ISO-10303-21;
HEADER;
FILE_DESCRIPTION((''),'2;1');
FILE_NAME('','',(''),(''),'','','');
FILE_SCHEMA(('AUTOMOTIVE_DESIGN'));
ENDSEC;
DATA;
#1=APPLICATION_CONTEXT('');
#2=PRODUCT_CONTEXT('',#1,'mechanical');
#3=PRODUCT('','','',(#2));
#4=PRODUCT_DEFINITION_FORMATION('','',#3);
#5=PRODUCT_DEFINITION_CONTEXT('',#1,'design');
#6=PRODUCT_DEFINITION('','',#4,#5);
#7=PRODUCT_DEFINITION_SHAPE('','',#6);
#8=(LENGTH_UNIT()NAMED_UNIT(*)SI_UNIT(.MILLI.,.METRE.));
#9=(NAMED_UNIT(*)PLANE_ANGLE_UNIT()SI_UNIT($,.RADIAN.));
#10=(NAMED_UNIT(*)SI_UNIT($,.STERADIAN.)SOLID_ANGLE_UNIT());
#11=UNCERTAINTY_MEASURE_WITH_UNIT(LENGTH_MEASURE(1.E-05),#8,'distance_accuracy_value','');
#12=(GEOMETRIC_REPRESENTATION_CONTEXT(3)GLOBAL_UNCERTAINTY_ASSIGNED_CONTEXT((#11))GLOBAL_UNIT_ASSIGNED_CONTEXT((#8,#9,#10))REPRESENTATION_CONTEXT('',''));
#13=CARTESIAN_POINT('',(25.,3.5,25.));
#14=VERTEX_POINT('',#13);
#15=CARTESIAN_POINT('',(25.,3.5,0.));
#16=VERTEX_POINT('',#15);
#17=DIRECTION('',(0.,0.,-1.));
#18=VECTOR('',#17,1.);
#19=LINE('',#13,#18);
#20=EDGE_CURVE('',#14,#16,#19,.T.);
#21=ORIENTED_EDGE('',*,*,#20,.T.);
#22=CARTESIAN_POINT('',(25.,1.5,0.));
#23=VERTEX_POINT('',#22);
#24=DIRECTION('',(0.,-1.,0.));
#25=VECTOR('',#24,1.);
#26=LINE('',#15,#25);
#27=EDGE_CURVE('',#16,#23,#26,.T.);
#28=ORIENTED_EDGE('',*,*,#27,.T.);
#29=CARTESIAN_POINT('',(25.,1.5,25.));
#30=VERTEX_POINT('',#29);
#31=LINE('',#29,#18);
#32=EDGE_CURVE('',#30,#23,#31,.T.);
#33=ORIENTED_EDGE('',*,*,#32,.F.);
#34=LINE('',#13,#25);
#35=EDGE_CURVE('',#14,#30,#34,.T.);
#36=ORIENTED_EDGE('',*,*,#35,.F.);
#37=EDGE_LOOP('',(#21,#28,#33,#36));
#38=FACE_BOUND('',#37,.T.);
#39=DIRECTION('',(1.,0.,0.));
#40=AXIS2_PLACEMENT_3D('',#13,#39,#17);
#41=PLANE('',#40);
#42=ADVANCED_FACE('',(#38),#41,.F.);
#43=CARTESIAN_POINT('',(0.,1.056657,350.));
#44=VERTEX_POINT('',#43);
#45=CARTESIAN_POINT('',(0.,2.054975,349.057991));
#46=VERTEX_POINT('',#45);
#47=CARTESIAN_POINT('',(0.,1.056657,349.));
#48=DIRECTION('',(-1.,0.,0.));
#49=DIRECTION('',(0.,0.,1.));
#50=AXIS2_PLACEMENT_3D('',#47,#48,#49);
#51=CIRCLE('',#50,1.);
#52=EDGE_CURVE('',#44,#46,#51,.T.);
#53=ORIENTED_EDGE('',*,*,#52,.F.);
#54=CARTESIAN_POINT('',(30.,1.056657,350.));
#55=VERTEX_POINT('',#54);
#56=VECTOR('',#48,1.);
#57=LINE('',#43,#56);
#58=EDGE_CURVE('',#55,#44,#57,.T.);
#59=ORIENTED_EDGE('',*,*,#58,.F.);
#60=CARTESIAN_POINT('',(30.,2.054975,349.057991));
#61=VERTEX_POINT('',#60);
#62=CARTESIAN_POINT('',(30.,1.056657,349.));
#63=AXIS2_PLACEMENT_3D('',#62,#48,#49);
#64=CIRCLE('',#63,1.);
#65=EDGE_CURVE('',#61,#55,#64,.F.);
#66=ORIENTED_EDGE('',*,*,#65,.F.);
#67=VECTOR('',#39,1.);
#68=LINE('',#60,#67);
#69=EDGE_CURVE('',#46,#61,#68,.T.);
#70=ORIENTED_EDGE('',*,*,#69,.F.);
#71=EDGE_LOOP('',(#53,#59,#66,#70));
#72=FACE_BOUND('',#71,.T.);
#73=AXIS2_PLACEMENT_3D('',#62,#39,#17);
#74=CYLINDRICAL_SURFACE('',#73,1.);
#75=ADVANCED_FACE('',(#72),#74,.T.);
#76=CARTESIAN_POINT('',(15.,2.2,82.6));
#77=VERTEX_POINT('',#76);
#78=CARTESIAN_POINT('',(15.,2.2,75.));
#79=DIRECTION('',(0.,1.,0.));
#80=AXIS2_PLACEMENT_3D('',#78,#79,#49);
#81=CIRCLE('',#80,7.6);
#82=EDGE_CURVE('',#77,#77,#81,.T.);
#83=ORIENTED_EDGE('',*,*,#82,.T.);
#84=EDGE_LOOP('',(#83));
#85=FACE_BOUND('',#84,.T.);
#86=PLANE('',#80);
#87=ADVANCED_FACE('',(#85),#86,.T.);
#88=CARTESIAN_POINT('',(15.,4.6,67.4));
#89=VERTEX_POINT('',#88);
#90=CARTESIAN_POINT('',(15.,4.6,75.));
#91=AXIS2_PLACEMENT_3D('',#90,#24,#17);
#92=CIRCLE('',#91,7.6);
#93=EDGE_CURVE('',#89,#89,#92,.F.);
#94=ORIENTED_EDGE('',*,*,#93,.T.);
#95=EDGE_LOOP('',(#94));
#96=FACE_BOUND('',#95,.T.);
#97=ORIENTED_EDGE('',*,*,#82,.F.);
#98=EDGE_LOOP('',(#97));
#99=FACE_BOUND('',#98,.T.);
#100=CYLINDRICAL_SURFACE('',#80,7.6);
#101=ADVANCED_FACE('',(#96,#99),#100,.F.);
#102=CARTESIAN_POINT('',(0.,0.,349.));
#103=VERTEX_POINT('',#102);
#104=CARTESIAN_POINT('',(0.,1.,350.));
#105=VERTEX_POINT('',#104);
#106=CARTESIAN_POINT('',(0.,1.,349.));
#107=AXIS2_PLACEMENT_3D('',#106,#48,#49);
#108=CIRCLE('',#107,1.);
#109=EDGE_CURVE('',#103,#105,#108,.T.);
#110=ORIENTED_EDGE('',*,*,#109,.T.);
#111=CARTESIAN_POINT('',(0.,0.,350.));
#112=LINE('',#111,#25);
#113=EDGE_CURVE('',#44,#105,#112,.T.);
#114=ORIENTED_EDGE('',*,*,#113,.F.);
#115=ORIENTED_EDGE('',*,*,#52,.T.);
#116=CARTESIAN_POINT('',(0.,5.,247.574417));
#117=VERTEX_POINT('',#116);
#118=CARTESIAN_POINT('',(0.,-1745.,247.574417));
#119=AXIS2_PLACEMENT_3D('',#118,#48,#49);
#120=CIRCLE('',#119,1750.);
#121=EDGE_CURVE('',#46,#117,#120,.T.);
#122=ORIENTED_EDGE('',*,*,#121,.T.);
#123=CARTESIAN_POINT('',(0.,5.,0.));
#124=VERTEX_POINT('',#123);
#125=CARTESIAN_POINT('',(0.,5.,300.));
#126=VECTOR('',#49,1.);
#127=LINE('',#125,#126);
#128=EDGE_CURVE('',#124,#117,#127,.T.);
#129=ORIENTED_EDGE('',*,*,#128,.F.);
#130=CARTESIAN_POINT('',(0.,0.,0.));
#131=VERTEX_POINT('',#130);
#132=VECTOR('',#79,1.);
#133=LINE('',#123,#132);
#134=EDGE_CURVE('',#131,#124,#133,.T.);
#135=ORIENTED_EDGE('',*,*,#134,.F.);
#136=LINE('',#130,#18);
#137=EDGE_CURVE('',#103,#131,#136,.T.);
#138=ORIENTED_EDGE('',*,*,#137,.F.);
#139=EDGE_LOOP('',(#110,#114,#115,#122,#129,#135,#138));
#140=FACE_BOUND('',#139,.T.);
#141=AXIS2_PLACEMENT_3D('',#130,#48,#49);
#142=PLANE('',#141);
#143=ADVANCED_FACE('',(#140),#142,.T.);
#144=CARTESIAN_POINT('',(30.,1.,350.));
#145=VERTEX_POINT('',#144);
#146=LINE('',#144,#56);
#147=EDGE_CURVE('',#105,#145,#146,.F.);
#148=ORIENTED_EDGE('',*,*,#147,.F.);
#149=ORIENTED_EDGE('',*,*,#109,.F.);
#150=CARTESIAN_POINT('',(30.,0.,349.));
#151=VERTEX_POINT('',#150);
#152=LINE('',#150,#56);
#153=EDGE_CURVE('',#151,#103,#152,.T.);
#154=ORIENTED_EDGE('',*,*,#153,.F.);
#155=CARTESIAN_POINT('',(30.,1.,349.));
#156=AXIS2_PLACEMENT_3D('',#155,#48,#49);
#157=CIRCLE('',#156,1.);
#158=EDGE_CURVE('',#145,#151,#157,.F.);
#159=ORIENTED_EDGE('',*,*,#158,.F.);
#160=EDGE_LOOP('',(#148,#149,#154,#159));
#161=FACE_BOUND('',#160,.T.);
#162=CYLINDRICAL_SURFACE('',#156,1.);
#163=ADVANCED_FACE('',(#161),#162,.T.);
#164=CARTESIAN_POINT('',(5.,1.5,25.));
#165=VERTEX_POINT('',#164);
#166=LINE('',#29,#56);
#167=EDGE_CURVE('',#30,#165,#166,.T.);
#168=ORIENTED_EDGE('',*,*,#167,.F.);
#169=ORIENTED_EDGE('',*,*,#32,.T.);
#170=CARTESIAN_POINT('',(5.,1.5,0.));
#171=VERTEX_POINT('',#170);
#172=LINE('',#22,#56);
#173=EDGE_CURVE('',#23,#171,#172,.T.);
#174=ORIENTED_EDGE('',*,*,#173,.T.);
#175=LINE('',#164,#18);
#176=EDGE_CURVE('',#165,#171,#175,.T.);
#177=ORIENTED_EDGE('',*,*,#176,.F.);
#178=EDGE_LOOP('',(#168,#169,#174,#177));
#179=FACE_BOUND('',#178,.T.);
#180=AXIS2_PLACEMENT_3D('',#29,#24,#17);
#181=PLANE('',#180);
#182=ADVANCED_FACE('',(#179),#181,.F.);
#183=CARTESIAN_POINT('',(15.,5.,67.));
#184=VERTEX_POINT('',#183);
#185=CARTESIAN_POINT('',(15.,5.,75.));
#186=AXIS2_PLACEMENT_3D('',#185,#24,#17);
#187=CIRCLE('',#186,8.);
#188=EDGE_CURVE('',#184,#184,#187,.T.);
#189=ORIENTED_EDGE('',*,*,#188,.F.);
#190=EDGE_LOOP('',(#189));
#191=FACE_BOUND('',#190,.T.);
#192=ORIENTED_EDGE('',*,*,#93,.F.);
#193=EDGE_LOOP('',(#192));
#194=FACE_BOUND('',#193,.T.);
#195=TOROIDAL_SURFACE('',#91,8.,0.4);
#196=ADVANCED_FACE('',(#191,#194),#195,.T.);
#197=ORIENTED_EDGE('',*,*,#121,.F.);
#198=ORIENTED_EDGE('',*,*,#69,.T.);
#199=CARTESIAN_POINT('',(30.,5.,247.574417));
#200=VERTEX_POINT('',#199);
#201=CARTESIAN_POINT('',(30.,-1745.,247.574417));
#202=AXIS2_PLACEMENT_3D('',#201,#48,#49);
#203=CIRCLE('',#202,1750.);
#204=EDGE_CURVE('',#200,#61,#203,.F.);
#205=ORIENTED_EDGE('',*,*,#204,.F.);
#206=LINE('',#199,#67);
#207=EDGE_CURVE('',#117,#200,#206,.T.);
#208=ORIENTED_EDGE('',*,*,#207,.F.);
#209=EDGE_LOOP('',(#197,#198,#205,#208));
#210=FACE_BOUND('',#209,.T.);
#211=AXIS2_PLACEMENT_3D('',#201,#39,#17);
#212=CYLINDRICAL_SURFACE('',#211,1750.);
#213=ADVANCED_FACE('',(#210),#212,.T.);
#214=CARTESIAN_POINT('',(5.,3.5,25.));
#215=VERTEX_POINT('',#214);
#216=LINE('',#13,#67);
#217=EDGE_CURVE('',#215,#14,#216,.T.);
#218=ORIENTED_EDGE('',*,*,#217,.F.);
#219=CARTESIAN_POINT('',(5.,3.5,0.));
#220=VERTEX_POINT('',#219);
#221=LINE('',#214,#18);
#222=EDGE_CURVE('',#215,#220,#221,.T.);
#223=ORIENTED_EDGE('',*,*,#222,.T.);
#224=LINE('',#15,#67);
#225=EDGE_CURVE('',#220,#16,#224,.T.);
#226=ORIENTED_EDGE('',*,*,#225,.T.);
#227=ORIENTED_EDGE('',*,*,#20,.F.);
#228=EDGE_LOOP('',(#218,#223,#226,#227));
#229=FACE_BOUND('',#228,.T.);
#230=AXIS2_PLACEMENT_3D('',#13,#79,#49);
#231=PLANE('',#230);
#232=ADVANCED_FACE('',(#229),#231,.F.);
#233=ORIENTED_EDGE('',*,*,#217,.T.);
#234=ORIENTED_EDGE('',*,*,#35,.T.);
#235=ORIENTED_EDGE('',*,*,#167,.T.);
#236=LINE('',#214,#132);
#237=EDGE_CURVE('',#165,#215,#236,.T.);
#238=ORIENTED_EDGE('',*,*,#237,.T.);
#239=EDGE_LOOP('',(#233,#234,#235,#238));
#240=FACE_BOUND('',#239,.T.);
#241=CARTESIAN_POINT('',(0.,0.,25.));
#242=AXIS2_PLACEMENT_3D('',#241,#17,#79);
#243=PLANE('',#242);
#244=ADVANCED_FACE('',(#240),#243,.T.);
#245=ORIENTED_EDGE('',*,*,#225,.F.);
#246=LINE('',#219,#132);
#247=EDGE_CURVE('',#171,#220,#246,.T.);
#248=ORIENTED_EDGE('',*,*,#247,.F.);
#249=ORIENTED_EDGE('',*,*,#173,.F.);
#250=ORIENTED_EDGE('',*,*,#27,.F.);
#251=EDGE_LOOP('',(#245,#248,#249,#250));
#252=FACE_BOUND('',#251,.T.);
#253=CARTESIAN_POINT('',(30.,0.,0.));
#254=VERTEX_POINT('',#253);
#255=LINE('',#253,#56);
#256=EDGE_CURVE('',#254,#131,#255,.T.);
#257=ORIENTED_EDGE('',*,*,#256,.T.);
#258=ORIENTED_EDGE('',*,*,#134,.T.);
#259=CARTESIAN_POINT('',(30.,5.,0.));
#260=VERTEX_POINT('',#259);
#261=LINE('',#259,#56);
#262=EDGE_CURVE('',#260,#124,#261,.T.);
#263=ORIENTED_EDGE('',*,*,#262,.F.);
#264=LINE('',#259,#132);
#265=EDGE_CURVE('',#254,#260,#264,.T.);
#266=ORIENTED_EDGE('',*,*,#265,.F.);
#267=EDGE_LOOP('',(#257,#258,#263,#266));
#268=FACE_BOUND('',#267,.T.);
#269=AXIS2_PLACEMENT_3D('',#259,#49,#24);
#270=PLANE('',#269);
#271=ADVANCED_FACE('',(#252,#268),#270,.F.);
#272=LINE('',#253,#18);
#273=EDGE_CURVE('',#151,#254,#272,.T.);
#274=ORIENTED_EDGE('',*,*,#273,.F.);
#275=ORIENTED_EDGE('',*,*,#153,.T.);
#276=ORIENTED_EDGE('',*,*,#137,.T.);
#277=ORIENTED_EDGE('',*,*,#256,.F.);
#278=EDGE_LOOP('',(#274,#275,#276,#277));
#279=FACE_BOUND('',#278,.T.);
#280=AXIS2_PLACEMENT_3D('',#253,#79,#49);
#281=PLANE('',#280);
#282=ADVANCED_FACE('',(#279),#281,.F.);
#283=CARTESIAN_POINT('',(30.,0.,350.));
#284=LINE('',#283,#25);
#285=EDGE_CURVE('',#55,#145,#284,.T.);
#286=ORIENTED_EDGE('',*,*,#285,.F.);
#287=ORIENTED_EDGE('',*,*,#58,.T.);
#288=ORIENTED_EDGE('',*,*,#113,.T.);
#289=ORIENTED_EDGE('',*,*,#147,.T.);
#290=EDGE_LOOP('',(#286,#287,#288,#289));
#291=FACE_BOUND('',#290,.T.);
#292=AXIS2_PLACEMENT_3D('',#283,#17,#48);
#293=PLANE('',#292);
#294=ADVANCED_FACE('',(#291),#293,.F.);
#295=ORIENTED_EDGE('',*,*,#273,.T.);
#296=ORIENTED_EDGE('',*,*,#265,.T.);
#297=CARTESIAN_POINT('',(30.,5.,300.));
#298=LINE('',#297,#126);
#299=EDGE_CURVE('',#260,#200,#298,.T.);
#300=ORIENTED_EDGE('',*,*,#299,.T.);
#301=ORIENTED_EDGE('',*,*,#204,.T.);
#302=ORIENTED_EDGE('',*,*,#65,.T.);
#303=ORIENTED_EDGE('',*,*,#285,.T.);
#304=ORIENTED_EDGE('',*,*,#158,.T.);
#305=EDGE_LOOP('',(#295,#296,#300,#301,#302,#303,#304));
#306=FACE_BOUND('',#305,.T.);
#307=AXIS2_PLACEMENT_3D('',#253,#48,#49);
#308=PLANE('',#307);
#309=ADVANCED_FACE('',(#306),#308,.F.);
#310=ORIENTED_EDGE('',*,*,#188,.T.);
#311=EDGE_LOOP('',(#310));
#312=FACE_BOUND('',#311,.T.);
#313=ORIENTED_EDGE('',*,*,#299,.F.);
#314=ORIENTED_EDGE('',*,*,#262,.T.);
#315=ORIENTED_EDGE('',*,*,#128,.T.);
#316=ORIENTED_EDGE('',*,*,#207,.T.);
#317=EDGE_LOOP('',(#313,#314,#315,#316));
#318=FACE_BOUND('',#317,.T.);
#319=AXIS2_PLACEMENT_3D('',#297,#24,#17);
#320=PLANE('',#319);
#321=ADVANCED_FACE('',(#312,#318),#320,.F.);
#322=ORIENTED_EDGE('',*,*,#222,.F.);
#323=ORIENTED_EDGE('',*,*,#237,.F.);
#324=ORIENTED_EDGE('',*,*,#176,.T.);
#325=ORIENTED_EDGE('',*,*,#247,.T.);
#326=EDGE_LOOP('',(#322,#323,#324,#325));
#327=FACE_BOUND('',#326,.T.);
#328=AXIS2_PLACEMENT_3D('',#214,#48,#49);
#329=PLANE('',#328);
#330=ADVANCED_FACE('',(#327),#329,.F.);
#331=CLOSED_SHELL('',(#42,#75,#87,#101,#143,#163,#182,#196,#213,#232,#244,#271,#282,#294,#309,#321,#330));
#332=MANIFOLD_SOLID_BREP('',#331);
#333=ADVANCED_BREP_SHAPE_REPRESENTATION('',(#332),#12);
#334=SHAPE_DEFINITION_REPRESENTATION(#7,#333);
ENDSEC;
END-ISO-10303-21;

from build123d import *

# Parameters (mm, degrees)
EXTRUDE_1_DEPTH     = 30
FILLET_1_R          = 1750
SKETCH_4_R          = 7.6
CUT_EXTRUDE_3_DEPTH = 2.8
FILLET_4_R          = 0.4
SKETCH_5_W          = 20
SKETCH_5_H          = 2
CUT_EXTRUDE_4_DEPTH = 25
FILLET_5_R          = 1


with BuildPart() as part:
    # 草图1 → 凸台-拉伸1 (new body)
    with BuildSketch(Plane(origin=(0, 0, 0), x_dir=(0, 0, -1), z_dir=(1, 0, 0))):
        Polygon((0, 0), (-350, 0), (-350, 2), (-300, 5), (0, 5), align=None)
    extrude(amount=EXTRUDE_1_DEPTH)

    # 圆角1
    # the kernel refuses this fillet: 1750 mm, written as the material it takes off along each edge
    with BuildSketch(Plane(origin=(-131.063956855, 5, 300), x_dir=(0, -0.05989229072794672, 0.9982048454657786), z_dir=(1, 0, 0))) as fillet_1_piece_1:
        with BuildLine():
            CenterArc((52.480038055, 1749.998367808), FILLET_1_R, 266.566369638, 3.35537678)
            Line((-52.331470719, 3.139888243), (-54.427700895, -31.797281348))
            Line((-54.427700895, -31.797281348), (-2.096230175, -34.937169591))
            Line((-2.096230175, -34.937169591), (0, -35))
            ThreePointArc((0, -35), (25.044959573, -35), (50.042116767, -34.999967356))
            Line((50.042116767, -34.999967356), (50.089919145, 0))
        make_face()
    extrude(amount=292.127913709, mode=Mode.SUBTRACT)

    # 草图4 → 切除-拉伸3 (cut)
    with BuildSketch(Plane(origin=(0, 5, 0), x_dir=(1, 0, 0), z_dir=(0, 1, 0))):
        with Locations(Location((15, -75, 0), (0, 0, 270))):
            Circle(SKETCH_4_R)
    extrude(amount=-CUT_EXTRUDE_3_DEPTH, mode=Mode.SUBTRACT)

    # 圆角4
    fillet_4_edges = [part.edges().sort_by_distance(p)[0] for p in [
        (15, 5, 67.4),
    ]]
    fillet(fillet_4_edges, radius=FILLET_4_R)

    # 草图5 → 切除-拉伸4 (cut)
    with BuildSketch(Plane(origin=(0, 0, 0), x_dir=(-1, 0, 0), z_dir=(0, 0, -1))):
        with Locations((-15, 2.5)):
            Rectangle(SKETCH_5_W, SKETCH_5_H)
    extrude(amount=-CUT_EXTRUDE_4_DEPTH, mode=Mode.SUBTRACT)

    # 圆角5
    fillet_5_edges = [part.edges().sort_by_distance(p)[0] for p in [
        (15, 0, 350),
        (15, 2, 350),
    ]]
    fillet(fillet_5_edges, radius=FILLET_5_R)


solid = part.part
